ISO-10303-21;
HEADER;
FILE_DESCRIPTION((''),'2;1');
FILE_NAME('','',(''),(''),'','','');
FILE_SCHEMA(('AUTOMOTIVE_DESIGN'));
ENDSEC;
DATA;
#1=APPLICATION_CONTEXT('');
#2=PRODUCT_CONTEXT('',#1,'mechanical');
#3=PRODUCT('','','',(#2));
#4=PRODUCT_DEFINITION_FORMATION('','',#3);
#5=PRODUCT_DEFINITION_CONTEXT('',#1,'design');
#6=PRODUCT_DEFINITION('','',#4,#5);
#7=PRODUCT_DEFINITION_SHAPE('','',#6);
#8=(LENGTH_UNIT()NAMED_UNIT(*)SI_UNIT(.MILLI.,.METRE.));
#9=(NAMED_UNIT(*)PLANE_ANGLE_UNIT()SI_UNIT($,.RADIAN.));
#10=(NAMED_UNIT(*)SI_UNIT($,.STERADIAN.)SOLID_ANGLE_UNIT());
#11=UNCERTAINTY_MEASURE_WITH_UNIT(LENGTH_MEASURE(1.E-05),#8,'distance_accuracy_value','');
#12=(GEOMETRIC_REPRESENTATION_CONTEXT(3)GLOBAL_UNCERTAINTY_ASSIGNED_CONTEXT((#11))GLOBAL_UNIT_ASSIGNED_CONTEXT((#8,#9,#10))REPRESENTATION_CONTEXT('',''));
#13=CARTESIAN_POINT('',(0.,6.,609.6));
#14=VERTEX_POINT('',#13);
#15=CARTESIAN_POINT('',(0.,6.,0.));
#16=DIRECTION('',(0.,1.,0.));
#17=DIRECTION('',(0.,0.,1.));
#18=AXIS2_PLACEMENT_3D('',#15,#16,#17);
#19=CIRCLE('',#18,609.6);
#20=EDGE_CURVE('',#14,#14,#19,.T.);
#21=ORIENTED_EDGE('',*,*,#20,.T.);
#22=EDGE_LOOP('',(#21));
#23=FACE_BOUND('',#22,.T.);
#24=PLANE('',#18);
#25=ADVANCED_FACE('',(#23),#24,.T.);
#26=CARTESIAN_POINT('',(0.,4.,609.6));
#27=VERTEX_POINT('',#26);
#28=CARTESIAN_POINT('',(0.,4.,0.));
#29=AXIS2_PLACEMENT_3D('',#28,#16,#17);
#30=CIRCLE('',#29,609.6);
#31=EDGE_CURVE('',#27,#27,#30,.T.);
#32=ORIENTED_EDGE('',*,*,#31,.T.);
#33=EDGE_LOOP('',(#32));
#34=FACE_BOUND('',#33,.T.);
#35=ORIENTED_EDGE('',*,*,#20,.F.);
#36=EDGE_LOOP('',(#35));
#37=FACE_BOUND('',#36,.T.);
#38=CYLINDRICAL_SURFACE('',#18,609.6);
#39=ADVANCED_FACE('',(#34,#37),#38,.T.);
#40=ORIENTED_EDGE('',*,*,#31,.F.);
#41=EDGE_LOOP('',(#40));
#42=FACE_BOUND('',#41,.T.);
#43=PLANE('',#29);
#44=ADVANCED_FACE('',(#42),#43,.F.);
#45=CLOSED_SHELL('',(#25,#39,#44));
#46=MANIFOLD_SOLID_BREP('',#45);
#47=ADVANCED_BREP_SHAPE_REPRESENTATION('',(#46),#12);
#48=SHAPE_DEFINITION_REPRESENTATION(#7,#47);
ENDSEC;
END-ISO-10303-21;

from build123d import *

# Parameters (mm, degrees)
SKETCH2_R                = 609.6
BOSS_EXTRUDE1_DEPTH      = 6
CONVERT_SOLID1_OUTLINE_R = 609.6
CONVERT_SOLID1_DEPTH     = 4


# Read off the part's stored shape, not the designer's step: Convert-Solid1
with BuildPart() as part:
    # Sketch2 → Boss-Extrude1 (new body)
    with BuildSketch(Plane(origin=(0, 0, 0), x_dir=(1, 0, 0), z_dir=(0, 1, 0))):
        with Locations(Location((0, 0, 0), (0, 0, 270))):
            Circle(SKETCH2_R)
    extrude(amount=BOSS_EXTRUDE1_DEPTH)

    # Convert-Solid1 outline → Convert-Solid1 (cut)
    with BuildSketch(Plane(origin=(0, 0, 0), x_dir=(1, 0, 0), z_dir=(0, 1, 0))):
        Circle(CONVERT_SOLID1_OUTLINE_R)
    extrude(amount=CONVERT_SOLID1_DEPTH, mode=Mode.SUBTRACT)


solid = part.part
